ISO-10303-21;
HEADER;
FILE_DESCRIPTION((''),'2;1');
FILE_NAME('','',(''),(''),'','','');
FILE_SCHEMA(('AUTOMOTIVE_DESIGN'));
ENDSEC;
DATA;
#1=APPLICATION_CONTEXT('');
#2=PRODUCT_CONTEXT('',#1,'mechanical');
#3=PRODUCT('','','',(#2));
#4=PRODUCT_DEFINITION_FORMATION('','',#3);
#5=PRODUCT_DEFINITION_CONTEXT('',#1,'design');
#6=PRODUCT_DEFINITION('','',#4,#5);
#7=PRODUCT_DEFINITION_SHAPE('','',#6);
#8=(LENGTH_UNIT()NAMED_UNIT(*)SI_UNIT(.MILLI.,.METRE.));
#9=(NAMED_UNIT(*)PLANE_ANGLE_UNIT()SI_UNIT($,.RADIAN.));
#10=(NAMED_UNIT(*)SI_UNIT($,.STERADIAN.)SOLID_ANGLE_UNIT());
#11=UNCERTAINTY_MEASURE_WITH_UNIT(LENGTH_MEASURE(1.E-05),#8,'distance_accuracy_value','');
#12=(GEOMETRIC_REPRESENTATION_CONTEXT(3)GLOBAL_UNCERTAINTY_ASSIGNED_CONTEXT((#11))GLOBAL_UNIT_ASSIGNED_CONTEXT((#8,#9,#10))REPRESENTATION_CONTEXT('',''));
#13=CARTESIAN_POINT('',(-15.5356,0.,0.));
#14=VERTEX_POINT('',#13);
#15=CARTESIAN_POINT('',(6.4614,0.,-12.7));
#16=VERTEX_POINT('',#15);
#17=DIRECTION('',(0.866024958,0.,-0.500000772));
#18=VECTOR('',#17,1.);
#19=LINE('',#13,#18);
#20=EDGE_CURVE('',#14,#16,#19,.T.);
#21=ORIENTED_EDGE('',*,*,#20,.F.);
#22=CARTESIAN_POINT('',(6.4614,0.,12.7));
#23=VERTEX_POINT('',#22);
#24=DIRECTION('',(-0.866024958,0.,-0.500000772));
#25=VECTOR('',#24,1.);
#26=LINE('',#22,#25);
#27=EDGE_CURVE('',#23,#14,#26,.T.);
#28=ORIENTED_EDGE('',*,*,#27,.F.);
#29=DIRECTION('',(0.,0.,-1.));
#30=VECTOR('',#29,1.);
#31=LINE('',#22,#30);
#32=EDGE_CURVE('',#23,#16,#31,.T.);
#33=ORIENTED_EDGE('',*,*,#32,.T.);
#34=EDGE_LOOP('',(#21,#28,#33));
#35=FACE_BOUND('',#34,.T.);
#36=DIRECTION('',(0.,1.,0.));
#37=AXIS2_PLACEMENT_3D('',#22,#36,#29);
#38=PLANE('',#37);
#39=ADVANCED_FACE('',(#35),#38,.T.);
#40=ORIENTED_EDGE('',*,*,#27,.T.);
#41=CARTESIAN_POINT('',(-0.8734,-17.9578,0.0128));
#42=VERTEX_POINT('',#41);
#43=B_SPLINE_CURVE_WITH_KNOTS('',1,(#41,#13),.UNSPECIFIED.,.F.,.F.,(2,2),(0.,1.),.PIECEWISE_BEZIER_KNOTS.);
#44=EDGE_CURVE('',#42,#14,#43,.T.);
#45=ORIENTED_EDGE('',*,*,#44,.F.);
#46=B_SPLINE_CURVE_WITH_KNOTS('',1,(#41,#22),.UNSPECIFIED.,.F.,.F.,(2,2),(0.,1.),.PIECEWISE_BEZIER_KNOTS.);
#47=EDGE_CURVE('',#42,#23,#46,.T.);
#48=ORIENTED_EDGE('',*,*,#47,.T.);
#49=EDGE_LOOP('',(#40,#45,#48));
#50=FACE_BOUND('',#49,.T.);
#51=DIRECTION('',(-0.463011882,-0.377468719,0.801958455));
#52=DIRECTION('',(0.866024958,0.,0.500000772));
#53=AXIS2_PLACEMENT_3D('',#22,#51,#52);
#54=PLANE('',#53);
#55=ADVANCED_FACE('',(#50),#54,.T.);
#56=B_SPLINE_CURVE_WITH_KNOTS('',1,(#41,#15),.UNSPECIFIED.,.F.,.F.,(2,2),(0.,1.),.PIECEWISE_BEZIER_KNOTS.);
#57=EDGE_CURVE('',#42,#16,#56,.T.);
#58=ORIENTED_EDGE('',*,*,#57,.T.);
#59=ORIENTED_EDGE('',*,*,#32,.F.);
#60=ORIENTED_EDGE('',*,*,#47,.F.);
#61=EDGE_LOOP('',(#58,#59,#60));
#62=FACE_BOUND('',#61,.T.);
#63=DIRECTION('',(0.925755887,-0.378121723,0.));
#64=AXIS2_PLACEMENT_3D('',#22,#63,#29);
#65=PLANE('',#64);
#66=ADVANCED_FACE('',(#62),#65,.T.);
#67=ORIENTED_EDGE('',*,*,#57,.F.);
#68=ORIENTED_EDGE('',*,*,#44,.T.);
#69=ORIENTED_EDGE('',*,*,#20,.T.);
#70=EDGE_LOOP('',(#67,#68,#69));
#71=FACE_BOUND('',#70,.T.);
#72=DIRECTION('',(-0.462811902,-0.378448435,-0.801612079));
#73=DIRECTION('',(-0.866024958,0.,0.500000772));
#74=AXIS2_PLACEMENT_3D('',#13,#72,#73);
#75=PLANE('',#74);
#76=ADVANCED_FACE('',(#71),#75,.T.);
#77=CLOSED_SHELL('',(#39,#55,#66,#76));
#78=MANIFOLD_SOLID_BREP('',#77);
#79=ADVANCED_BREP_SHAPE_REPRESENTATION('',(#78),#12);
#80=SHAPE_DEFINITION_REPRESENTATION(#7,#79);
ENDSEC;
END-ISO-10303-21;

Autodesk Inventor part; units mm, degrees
ref_plane "YZ Plane" through (0, 0, 0) normal (1, 0, 0) x (0, 1, 0)
ref_plane "XZ Plane" through (0, 0, 0) normal (0, 1, 0) x (-1, 0, 0)
sketch "Sketch1" plane through (0, 0, 0) normal (0, 1, 0) x (-1, 0, 0)
  line L0 (-6.4614, 12.7) -> (-6.4614, -12.7)
  line L1 (11.6761, 0) -> (-11.921, 0)
  line L2 (-6.4614, 12.7) -> (15.5356, 0)
  line L3 (15.5356, 0) -> (-6.4614, -12.7)
  line L4 (-6.4614, -12.7) -> (3.3823, 4.3498)
  line L5 (-6.4614, 12.7) -> (2.7414, -3.2397)
  point P0 (0, 0)
  dimension "d0" = 25.4
  dimension "d1" = 12.7
  dimension "d2" = 60
  dimension "d3" = 0
  dimension "d4" = 30
  dimension "d5" = 30
ref_plane "Work Plane2" through (-15.5356, -17.9578, 0) normal (0, -1, 0) x (0.8660254, 0, -0.5)
ref_plane "Work Plane1" through (-15.5356, 0, 0) normal (0, -1, 0) x (0.8660254, 0, -0.5)
sketch "Sketch3" plane through (-15.5356, -17.9578, 0) normal (0, -1, 0) x (0.8660254, 0, -0.5)
  point P0 (13.4543, 7.7678)
  point P1 (12.6914, 7.3422)
loft "Loft1" add profiles "Sketch1" section 1 point at (-0.8734, -17.9578, 0.0128)
properties part number "JIMSPT"
